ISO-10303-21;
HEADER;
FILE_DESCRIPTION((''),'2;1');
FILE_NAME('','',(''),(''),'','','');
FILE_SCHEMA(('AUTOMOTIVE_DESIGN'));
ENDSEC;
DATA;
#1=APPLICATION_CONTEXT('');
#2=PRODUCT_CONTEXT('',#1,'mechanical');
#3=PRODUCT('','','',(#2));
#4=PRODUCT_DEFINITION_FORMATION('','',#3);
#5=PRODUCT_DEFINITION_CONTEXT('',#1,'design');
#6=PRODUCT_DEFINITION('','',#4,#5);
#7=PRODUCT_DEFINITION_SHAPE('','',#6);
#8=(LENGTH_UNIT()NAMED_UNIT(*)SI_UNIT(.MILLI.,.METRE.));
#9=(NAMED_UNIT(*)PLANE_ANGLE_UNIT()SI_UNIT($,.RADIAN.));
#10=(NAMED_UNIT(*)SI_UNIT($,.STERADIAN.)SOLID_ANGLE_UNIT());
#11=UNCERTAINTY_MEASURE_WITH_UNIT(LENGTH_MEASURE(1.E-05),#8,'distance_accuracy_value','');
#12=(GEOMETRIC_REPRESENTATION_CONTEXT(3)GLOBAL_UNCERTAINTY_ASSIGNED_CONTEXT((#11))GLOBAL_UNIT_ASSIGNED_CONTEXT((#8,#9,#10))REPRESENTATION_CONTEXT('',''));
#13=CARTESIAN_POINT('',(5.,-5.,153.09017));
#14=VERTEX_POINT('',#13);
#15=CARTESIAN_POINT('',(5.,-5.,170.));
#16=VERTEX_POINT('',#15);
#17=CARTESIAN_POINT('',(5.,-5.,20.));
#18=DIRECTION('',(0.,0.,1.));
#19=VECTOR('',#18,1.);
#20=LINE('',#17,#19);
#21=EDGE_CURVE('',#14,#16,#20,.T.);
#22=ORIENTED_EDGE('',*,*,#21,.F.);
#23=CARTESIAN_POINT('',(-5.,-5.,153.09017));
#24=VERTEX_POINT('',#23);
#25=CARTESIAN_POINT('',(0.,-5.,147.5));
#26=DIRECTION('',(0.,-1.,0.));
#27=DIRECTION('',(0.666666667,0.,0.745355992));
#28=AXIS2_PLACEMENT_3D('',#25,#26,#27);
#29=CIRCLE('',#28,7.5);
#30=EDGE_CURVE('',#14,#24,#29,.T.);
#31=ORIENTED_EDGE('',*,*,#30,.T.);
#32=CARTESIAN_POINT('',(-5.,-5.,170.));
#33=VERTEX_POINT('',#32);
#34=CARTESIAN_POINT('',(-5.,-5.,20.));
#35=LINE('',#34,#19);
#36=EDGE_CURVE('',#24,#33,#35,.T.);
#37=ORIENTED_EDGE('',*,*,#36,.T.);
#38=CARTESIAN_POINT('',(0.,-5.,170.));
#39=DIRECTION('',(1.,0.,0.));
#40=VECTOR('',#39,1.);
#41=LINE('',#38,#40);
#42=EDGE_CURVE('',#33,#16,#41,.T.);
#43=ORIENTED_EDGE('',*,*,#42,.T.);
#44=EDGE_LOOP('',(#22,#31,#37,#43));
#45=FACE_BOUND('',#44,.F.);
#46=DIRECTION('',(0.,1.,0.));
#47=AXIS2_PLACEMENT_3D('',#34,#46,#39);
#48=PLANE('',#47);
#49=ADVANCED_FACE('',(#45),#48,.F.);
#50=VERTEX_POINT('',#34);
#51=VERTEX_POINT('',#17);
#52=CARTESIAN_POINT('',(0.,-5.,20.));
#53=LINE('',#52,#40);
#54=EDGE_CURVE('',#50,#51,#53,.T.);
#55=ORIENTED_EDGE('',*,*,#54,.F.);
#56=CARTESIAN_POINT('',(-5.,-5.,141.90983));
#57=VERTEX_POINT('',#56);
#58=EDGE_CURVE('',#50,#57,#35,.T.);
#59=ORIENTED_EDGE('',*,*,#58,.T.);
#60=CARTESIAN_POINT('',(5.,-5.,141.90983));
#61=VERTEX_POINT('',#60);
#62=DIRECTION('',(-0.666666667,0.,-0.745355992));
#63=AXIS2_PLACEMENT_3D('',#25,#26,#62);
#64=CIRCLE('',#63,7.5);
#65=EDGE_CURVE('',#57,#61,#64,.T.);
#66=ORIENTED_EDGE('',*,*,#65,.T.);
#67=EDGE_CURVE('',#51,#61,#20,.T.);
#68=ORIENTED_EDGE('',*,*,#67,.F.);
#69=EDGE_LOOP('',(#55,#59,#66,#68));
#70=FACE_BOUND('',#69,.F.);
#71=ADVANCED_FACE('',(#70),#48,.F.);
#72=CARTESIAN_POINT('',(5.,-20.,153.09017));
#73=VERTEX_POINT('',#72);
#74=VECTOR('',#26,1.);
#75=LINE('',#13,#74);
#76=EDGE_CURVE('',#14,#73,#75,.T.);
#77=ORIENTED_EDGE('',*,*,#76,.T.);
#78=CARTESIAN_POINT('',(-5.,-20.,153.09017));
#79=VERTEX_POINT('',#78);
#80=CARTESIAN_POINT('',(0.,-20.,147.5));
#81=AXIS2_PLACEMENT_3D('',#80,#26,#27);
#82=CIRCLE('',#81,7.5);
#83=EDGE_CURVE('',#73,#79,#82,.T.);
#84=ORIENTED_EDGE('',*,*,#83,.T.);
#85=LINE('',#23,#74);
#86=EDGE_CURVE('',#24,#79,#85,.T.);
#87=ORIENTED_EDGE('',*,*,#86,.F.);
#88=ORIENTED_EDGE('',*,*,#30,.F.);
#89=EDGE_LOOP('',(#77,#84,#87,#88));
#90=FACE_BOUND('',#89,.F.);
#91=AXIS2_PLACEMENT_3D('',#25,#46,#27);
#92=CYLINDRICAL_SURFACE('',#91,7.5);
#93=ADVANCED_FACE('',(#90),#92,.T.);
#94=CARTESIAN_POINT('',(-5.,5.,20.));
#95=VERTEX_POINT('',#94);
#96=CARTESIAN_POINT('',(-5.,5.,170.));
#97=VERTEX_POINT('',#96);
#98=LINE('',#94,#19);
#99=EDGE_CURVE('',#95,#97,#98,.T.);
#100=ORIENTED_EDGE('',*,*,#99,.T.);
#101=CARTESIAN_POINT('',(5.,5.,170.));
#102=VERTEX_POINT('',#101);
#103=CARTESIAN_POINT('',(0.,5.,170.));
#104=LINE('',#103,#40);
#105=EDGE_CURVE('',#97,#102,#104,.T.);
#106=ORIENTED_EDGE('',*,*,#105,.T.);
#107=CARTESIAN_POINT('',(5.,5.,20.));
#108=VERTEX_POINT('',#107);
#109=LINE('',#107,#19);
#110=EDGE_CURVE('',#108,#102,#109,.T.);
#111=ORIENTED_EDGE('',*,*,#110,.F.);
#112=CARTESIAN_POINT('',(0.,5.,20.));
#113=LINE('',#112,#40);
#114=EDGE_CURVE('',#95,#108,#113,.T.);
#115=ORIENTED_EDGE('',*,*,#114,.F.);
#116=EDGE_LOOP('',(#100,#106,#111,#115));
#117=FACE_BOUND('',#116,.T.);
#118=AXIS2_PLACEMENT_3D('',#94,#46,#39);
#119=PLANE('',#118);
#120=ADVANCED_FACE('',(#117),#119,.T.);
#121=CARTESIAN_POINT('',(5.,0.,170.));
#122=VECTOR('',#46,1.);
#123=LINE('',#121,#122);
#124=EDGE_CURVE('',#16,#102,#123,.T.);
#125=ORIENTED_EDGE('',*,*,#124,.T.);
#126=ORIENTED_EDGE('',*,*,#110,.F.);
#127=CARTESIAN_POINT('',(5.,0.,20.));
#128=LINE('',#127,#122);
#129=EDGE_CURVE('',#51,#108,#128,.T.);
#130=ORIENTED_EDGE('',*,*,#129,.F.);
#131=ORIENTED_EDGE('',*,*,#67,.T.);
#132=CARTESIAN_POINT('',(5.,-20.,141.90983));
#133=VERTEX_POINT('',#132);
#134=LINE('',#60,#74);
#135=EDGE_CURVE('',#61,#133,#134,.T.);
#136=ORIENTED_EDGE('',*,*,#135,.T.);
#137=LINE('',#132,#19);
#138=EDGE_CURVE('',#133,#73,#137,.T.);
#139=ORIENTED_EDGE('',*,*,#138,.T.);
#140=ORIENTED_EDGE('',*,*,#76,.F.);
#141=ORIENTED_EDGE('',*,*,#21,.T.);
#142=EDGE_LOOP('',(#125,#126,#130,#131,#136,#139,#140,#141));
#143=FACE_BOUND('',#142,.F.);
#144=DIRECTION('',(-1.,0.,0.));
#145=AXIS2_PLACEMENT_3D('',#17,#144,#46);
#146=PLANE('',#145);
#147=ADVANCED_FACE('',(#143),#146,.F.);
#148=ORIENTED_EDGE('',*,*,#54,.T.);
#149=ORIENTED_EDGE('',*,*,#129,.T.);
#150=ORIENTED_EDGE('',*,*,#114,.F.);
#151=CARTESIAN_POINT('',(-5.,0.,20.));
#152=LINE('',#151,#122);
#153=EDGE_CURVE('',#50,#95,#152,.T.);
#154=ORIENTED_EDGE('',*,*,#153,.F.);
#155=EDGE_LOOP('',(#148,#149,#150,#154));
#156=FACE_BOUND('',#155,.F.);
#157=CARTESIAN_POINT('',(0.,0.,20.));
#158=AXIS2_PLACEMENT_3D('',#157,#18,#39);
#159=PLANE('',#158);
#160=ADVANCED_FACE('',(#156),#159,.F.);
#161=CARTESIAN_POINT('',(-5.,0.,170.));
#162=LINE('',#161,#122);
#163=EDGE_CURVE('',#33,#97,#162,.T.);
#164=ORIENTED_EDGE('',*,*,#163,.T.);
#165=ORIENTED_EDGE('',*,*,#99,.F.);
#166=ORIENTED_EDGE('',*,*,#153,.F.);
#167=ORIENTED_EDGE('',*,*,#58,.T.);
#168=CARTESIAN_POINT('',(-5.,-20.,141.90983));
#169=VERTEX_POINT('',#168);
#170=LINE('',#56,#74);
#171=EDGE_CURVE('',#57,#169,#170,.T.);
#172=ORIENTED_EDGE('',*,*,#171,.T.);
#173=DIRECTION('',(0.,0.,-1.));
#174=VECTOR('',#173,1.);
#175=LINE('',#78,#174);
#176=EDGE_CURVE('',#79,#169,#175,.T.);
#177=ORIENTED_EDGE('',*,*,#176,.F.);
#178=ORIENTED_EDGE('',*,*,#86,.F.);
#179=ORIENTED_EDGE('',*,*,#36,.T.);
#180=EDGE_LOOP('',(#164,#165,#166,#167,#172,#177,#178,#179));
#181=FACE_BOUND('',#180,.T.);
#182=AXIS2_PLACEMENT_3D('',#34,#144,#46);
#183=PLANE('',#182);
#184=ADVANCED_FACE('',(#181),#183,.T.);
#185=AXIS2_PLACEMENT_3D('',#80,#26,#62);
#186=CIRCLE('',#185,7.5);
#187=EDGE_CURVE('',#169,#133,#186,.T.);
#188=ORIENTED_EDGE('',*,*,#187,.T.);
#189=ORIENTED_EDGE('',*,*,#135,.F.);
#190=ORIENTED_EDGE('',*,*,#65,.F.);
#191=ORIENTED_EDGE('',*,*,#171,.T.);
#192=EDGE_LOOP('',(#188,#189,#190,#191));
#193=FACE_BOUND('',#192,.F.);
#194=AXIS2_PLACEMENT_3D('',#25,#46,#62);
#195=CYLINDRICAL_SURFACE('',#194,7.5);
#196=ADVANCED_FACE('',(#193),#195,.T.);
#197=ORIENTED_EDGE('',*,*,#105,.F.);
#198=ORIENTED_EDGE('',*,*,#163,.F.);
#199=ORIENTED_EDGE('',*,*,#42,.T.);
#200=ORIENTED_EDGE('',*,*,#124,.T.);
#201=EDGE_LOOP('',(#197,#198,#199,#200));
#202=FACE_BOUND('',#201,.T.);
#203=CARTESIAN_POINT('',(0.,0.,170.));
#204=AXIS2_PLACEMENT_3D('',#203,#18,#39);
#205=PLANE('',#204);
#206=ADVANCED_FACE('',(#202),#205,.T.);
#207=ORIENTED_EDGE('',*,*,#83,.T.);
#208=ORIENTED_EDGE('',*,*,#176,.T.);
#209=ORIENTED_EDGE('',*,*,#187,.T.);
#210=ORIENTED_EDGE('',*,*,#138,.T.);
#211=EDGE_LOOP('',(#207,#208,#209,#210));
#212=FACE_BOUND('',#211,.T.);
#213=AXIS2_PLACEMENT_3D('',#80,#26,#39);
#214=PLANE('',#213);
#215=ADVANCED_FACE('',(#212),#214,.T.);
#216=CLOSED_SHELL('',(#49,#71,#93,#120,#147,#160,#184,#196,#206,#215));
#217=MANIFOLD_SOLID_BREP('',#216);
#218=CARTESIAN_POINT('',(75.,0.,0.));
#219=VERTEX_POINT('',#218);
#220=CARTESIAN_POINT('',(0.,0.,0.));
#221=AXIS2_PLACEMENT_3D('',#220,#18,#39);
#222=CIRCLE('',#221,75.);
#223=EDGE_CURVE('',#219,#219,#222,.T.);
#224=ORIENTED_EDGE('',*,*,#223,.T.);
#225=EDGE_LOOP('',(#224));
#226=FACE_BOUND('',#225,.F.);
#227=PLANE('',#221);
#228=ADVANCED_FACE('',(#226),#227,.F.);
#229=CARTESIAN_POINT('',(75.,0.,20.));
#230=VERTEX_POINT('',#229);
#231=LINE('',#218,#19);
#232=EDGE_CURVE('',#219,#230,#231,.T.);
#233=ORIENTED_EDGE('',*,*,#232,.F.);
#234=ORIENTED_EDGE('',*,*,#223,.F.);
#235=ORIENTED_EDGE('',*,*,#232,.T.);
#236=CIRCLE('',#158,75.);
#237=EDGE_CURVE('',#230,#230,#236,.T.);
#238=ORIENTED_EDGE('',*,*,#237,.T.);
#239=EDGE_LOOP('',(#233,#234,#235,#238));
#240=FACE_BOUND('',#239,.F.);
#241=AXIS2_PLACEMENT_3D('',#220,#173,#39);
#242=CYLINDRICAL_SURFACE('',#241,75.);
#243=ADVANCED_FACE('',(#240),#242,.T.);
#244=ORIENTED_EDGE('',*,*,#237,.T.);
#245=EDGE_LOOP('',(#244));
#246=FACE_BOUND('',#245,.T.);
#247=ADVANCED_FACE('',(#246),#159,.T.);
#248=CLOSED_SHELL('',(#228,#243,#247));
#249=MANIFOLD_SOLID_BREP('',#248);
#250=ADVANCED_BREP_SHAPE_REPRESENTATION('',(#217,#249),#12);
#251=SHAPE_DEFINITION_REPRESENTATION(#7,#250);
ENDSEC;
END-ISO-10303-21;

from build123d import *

# Parameters (mm, degrees)
F0_R     = 75
F1_DEPTH = 20
F2_W     = 10
F2_H     = 10
F3_DEPTH = 150
F5_DEPTH = 15


with BuildPart() as f1:
    # F0 (on Top) → F1 (new body)
    with BuildSketch(Plane.XY):
        Circle(F0_R)
    extrude(amount=F1_DEPTH)


with BuildPart() as f3:
    # F2 (on face) → F3 (new body)
    with BuildSketch(Plane.XY.offset(20)):
        Rectangle(F2_W, F2_H)
    extrude(amount=F3_DEPTH)

    # F4 (on face) → F5 (join)
    with BuildSketch(Plane.XZ.offset(5)):
        with BuildLine():
            Line((5, 141.9098300563), (5, 153.0901699437))
            ThreePointArc((5, 153.0901699437), (0, 155), (-5, 153.0901699437))
            Line((-5, 153.0901699437), (-5, 141.9098300563))
            ThreePointArc((-5, 141.9098300563), (0, 140), (5, 141.9098300563))
        make_face()
    extrude(amount=F5_DEPTH)


solid = Compound([f1.part, f3.part])
